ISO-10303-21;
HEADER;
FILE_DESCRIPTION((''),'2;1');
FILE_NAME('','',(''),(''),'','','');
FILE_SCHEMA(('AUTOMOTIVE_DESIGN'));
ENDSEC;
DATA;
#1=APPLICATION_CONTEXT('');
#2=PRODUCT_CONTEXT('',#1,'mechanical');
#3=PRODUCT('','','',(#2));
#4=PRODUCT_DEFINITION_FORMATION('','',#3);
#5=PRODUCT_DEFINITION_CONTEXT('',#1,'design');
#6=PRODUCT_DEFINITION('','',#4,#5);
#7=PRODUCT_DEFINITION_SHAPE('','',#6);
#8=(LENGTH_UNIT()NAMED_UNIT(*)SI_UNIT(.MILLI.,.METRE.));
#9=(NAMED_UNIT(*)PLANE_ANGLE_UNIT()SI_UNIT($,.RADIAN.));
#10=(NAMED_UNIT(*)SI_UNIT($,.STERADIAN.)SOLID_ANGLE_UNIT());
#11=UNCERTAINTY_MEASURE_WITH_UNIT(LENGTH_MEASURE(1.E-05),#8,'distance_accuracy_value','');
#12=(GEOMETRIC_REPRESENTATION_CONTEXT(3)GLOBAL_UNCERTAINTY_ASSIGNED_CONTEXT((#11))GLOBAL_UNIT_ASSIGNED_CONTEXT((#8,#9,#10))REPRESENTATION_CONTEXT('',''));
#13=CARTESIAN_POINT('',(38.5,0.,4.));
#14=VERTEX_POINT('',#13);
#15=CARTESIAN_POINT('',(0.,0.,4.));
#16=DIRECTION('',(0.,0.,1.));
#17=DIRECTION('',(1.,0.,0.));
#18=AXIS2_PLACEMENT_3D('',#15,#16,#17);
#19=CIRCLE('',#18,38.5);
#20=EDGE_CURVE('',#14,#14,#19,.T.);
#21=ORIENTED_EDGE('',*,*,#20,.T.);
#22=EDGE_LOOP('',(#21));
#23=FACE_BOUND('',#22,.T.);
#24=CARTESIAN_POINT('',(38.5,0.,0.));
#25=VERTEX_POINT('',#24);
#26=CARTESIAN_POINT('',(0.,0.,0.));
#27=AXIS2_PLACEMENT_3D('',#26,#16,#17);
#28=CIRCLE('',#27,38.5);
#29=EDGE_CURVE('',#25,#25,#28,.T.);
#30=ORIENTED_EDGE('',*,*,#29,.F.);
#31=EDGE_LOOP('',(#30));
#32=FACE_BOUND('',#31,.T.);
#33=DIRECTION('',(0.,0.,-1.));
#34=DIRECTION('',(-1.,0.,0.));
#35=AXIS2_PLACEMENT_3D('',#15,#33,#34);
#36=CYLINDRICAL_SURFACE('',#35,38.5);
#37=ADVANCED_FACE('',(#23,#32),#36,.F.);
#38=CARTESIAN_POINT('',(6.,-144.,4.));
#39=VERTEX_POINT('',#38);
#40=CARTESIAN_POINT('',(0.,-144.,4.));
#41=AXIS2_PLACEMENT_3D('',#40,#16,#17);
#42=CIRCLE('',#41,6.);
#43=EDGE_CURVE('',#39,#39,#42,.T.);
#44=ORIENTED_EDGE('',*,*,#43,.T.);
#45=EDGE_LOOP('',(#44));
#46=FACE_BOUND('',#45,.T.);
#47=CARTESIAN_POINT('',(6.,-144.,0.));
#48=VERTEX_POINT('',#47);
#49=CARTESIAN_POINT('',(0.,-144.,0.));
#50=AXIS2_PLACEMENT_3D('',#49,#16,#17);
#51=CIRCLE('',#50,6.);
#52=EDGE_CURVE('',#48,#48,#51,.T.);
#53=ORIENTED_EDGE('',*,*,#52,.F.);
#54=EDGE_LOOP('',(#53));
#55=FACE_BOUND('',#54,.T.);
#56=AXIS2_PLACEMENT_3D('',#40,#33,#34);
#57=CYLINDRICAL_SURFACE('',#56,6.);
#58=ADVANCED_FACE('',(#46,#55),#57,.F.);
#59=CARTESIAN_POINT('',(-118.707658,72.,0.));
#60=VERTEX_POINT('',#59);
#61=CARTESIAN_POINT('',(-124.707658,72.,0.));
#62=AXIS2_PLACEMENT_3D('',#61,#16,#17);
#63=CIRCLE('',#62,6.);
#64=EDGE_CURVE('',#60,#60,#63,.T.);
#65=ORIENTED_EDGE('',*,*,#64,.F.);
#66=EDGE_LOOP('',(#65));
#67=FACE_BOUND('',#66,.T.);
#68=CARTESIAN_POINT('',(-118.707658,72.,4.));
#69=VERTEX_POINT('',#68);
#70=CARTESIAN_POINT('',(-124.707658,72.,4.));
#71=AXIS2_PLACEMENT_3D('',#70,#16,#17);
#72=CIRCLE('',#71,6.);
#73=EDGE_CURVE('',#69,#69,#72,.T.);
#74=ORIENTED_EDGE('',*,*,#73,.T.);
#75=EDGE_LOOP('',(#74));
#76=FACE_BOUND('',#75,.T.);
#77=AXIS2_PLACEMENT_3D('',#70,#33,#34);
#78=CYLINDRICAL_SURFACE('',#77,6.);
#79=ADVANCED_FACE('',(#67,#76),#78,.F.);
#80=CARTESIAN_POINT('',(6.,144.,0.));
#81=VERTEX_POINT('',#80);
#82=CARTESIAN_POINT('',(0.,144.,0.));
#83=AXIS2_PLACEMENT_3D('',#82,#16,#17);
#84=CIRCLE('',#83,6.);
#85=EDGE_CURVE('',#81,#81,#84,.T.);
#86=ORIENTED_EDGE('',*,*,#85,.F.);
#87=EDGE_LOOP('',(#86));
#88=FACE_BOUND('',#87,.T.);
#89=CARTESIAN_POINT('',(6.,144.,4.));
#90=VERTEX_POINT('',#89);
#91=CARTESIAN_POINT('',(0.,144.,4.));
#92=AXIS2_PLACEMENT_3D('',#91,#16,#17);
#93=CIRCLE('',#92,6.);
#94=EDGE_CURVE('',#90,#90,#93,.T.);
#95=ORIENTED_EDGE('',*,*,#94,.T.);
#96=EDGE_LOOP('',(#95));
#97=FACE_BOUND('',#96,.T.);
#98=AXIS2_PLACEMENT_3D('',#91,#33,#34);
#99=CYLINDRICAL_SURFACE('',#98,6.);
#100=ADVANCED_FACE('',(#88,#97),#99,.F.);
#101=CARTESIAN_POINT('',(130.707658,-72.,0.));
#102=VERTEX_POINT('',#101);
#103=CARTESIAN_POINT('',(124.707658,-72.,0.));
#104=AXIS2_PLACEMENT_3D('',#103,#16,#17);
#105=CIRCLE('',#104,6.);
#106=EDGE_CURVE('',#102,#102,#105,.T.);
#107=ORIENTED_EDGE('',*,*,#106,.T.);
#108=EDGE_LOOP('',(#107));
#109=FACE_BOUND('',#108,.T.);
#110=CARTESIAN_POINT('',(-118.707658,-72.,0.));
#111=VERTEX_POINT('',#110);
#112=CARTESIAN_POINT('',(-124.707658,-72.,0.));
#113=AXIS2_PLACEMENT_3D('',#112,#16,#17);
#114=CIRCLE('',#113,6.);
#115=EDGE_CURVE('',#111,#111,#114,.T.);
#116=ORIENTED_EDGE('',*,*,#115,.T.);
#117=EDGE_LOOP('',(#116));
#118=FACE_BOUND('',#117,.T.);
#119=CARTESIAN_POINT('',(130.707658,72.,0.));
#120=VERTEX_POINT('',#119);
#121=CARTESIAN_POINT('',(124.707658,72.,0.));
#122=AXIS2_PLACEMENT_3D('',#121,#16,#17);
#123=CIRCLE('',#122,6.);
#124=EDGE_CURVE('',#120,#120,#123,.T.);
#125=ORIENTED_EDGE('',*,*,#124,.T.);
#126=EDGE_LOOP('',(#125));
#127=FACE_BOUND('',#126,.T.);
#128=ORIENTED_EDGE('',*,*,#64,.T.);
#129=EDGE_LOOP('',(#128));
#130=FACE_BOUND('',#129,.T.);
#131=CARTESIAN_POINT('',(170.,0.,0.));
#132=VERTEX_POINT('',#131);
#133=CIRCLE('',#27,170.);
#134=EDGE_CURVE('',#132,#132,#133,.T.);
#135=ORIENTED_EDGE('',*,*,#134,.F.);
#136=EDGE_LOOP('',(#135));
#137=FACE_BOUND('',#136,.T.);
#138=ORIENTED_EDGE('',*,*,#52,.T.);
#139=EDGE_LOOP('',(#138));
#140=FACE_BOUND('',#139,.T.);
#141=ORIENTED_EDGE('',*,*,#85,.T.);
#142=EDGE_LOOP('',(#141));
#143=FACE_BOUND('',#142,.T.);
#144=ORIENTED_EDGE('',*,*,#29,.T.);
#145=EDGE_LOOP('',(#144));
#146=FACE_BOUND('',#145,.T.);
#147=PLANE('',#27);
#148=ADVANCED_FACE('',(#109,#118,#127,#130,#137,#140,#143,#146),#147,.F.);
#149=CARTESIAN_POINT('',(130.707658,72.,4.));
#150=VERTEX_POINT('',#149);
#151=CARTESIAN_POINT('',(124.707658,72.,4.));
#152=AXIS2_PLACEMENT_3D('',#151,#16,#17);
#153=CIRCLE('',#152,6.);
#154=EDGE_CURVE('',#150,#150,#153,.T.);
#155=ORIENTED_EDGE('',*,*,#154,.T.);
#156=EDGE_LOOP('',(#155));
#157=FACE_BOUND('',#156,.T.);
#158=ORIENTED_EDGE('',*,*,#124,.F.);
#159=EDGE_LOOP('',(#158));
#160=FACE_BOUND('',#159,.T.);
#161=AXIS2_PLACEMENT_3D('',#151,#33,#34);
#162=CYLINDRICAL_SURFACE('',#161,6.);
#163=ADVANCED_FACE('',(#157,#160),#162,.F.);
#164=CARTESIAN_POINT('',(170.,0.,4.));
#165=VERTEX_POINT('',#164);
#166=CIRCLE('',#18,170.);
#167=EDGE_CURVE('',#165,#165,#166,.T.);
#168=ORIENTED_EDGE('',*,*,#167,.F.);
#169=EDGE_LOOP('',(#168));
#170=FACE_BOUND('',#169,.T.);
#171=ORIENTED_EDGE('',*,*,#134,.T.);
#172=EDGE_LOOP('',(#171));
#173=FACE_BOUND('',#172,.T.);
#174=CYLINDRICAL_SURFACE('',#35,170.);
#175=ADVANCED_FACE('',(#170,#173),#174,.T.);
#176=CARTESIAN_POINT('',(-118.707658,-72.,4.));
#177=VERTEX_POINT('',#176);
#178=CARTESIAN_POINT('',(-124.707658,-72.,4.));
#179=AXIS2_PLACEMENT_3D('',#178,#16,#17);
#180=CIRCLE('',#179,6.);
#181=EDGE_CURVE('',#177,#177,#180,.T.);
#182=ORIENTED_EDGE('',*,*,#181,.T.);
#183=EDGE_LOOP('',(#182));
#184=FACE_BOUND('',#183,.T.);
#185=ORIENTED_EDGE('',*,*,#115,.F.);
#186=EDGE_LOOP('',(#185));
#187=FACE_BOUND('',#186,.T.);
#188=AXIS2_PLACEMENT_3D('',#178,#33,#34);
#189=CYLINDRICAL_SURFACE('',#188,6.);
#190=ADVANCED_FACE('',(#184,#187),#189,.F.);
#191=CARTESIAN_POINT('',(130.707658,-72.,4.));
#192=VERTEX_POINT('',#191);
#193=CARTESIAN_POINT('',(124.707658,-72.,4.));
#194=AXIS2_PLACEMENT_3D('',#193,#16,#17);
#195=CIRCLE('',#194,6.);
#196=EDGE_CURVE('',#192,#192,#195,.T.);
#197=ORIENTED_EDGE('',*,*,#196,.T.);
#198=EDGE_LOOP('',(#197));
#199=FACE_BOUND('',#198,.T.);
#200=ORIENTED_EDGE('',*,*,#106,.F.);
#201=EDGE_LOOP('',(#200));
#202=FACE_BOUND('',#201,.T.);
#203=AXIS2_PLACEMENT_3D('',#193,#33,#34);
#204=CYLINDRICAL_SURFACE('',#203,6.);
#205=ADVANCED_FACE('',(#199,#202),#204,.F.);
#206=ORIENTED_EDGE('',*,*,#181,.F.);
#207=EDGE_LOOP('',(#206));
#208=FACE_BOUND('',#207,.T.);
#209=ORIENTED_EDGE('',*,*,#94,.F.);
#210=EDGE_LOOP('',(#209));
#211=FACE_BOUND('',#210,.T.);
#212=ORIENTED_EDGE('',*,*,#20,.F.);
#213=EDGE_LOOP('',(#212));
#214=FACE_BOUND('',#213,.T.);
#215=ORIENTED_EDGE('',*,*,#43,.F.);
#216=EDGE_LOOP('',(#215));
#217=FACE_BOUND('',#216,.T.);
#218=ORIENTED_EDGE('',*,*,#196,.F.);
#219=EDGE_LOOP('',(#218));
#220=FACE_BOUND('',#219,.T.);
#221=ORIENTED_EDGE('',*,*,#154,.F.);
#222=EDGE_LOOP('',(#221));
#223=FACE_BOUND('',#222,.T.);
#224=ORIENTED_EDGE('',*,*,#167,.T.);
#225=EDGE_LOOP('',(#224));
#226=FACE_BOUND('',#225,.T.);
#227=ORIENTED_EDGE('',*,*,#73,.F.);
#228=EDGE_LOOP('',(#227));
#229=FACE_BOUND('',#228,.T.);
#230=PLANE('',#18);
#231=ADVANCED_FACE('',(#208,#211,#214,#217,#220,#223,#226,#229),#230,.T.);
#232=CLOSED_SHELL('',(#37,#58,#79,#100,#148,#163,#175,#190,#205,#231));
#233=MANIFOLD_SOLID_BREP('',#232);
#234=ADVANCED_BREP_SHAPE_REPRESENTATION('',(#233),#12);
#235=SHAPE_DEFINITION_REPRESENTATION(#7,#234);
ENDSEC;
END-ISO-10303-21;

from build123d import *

# Parameters (mm, degrees)
SKETCH_1_R             = 170
SKETCH_1_R_2           = 38.5
SKETCH_1_R_3           = 6
SM_BASE_FLANGE_1_DEPTH = 4


# Sheet-metal steps are written as plain solids
with BuildPart() as part:
    # Sketch 1 → Базовая кромка1 (new body)
    with BuildSketch(Plane.XY):
        Circle(SKETCH_1_R)
        Circle(SKETCH_1_R_2, mode=Mode.SUBTRACT)
        with Locations((0, 144)):
            Circle(SKETCH_1_R_3, mode=Mode.SUBTRACT)
        with Locations((124.707658145, 72)):
            Circle(SKETCH_1_R_3, mode=Mode.SUBTRACT)
        with Locations((124.707658145, -72)):
            Circle(SKETCH_1_R_3, mode=Mode.SUBTRACT)
        with Locations((0, -144)):
            Circle(SKETCH_1_R_3, mode=Mode.SUBTRACT)
        with Locations((-124.707658145, -72)):
            Circle(SKETCH_1_R_3, mode=Mode.SUBTRACT)
        with Locations((-124.707658145, 72)):
            Circle(SKETCH_1_R_3, mode=Mode.SUBTRACT)
    extrude(amount=SM_BASE_FLANGE_1_DEPTH)


solid = part.part
